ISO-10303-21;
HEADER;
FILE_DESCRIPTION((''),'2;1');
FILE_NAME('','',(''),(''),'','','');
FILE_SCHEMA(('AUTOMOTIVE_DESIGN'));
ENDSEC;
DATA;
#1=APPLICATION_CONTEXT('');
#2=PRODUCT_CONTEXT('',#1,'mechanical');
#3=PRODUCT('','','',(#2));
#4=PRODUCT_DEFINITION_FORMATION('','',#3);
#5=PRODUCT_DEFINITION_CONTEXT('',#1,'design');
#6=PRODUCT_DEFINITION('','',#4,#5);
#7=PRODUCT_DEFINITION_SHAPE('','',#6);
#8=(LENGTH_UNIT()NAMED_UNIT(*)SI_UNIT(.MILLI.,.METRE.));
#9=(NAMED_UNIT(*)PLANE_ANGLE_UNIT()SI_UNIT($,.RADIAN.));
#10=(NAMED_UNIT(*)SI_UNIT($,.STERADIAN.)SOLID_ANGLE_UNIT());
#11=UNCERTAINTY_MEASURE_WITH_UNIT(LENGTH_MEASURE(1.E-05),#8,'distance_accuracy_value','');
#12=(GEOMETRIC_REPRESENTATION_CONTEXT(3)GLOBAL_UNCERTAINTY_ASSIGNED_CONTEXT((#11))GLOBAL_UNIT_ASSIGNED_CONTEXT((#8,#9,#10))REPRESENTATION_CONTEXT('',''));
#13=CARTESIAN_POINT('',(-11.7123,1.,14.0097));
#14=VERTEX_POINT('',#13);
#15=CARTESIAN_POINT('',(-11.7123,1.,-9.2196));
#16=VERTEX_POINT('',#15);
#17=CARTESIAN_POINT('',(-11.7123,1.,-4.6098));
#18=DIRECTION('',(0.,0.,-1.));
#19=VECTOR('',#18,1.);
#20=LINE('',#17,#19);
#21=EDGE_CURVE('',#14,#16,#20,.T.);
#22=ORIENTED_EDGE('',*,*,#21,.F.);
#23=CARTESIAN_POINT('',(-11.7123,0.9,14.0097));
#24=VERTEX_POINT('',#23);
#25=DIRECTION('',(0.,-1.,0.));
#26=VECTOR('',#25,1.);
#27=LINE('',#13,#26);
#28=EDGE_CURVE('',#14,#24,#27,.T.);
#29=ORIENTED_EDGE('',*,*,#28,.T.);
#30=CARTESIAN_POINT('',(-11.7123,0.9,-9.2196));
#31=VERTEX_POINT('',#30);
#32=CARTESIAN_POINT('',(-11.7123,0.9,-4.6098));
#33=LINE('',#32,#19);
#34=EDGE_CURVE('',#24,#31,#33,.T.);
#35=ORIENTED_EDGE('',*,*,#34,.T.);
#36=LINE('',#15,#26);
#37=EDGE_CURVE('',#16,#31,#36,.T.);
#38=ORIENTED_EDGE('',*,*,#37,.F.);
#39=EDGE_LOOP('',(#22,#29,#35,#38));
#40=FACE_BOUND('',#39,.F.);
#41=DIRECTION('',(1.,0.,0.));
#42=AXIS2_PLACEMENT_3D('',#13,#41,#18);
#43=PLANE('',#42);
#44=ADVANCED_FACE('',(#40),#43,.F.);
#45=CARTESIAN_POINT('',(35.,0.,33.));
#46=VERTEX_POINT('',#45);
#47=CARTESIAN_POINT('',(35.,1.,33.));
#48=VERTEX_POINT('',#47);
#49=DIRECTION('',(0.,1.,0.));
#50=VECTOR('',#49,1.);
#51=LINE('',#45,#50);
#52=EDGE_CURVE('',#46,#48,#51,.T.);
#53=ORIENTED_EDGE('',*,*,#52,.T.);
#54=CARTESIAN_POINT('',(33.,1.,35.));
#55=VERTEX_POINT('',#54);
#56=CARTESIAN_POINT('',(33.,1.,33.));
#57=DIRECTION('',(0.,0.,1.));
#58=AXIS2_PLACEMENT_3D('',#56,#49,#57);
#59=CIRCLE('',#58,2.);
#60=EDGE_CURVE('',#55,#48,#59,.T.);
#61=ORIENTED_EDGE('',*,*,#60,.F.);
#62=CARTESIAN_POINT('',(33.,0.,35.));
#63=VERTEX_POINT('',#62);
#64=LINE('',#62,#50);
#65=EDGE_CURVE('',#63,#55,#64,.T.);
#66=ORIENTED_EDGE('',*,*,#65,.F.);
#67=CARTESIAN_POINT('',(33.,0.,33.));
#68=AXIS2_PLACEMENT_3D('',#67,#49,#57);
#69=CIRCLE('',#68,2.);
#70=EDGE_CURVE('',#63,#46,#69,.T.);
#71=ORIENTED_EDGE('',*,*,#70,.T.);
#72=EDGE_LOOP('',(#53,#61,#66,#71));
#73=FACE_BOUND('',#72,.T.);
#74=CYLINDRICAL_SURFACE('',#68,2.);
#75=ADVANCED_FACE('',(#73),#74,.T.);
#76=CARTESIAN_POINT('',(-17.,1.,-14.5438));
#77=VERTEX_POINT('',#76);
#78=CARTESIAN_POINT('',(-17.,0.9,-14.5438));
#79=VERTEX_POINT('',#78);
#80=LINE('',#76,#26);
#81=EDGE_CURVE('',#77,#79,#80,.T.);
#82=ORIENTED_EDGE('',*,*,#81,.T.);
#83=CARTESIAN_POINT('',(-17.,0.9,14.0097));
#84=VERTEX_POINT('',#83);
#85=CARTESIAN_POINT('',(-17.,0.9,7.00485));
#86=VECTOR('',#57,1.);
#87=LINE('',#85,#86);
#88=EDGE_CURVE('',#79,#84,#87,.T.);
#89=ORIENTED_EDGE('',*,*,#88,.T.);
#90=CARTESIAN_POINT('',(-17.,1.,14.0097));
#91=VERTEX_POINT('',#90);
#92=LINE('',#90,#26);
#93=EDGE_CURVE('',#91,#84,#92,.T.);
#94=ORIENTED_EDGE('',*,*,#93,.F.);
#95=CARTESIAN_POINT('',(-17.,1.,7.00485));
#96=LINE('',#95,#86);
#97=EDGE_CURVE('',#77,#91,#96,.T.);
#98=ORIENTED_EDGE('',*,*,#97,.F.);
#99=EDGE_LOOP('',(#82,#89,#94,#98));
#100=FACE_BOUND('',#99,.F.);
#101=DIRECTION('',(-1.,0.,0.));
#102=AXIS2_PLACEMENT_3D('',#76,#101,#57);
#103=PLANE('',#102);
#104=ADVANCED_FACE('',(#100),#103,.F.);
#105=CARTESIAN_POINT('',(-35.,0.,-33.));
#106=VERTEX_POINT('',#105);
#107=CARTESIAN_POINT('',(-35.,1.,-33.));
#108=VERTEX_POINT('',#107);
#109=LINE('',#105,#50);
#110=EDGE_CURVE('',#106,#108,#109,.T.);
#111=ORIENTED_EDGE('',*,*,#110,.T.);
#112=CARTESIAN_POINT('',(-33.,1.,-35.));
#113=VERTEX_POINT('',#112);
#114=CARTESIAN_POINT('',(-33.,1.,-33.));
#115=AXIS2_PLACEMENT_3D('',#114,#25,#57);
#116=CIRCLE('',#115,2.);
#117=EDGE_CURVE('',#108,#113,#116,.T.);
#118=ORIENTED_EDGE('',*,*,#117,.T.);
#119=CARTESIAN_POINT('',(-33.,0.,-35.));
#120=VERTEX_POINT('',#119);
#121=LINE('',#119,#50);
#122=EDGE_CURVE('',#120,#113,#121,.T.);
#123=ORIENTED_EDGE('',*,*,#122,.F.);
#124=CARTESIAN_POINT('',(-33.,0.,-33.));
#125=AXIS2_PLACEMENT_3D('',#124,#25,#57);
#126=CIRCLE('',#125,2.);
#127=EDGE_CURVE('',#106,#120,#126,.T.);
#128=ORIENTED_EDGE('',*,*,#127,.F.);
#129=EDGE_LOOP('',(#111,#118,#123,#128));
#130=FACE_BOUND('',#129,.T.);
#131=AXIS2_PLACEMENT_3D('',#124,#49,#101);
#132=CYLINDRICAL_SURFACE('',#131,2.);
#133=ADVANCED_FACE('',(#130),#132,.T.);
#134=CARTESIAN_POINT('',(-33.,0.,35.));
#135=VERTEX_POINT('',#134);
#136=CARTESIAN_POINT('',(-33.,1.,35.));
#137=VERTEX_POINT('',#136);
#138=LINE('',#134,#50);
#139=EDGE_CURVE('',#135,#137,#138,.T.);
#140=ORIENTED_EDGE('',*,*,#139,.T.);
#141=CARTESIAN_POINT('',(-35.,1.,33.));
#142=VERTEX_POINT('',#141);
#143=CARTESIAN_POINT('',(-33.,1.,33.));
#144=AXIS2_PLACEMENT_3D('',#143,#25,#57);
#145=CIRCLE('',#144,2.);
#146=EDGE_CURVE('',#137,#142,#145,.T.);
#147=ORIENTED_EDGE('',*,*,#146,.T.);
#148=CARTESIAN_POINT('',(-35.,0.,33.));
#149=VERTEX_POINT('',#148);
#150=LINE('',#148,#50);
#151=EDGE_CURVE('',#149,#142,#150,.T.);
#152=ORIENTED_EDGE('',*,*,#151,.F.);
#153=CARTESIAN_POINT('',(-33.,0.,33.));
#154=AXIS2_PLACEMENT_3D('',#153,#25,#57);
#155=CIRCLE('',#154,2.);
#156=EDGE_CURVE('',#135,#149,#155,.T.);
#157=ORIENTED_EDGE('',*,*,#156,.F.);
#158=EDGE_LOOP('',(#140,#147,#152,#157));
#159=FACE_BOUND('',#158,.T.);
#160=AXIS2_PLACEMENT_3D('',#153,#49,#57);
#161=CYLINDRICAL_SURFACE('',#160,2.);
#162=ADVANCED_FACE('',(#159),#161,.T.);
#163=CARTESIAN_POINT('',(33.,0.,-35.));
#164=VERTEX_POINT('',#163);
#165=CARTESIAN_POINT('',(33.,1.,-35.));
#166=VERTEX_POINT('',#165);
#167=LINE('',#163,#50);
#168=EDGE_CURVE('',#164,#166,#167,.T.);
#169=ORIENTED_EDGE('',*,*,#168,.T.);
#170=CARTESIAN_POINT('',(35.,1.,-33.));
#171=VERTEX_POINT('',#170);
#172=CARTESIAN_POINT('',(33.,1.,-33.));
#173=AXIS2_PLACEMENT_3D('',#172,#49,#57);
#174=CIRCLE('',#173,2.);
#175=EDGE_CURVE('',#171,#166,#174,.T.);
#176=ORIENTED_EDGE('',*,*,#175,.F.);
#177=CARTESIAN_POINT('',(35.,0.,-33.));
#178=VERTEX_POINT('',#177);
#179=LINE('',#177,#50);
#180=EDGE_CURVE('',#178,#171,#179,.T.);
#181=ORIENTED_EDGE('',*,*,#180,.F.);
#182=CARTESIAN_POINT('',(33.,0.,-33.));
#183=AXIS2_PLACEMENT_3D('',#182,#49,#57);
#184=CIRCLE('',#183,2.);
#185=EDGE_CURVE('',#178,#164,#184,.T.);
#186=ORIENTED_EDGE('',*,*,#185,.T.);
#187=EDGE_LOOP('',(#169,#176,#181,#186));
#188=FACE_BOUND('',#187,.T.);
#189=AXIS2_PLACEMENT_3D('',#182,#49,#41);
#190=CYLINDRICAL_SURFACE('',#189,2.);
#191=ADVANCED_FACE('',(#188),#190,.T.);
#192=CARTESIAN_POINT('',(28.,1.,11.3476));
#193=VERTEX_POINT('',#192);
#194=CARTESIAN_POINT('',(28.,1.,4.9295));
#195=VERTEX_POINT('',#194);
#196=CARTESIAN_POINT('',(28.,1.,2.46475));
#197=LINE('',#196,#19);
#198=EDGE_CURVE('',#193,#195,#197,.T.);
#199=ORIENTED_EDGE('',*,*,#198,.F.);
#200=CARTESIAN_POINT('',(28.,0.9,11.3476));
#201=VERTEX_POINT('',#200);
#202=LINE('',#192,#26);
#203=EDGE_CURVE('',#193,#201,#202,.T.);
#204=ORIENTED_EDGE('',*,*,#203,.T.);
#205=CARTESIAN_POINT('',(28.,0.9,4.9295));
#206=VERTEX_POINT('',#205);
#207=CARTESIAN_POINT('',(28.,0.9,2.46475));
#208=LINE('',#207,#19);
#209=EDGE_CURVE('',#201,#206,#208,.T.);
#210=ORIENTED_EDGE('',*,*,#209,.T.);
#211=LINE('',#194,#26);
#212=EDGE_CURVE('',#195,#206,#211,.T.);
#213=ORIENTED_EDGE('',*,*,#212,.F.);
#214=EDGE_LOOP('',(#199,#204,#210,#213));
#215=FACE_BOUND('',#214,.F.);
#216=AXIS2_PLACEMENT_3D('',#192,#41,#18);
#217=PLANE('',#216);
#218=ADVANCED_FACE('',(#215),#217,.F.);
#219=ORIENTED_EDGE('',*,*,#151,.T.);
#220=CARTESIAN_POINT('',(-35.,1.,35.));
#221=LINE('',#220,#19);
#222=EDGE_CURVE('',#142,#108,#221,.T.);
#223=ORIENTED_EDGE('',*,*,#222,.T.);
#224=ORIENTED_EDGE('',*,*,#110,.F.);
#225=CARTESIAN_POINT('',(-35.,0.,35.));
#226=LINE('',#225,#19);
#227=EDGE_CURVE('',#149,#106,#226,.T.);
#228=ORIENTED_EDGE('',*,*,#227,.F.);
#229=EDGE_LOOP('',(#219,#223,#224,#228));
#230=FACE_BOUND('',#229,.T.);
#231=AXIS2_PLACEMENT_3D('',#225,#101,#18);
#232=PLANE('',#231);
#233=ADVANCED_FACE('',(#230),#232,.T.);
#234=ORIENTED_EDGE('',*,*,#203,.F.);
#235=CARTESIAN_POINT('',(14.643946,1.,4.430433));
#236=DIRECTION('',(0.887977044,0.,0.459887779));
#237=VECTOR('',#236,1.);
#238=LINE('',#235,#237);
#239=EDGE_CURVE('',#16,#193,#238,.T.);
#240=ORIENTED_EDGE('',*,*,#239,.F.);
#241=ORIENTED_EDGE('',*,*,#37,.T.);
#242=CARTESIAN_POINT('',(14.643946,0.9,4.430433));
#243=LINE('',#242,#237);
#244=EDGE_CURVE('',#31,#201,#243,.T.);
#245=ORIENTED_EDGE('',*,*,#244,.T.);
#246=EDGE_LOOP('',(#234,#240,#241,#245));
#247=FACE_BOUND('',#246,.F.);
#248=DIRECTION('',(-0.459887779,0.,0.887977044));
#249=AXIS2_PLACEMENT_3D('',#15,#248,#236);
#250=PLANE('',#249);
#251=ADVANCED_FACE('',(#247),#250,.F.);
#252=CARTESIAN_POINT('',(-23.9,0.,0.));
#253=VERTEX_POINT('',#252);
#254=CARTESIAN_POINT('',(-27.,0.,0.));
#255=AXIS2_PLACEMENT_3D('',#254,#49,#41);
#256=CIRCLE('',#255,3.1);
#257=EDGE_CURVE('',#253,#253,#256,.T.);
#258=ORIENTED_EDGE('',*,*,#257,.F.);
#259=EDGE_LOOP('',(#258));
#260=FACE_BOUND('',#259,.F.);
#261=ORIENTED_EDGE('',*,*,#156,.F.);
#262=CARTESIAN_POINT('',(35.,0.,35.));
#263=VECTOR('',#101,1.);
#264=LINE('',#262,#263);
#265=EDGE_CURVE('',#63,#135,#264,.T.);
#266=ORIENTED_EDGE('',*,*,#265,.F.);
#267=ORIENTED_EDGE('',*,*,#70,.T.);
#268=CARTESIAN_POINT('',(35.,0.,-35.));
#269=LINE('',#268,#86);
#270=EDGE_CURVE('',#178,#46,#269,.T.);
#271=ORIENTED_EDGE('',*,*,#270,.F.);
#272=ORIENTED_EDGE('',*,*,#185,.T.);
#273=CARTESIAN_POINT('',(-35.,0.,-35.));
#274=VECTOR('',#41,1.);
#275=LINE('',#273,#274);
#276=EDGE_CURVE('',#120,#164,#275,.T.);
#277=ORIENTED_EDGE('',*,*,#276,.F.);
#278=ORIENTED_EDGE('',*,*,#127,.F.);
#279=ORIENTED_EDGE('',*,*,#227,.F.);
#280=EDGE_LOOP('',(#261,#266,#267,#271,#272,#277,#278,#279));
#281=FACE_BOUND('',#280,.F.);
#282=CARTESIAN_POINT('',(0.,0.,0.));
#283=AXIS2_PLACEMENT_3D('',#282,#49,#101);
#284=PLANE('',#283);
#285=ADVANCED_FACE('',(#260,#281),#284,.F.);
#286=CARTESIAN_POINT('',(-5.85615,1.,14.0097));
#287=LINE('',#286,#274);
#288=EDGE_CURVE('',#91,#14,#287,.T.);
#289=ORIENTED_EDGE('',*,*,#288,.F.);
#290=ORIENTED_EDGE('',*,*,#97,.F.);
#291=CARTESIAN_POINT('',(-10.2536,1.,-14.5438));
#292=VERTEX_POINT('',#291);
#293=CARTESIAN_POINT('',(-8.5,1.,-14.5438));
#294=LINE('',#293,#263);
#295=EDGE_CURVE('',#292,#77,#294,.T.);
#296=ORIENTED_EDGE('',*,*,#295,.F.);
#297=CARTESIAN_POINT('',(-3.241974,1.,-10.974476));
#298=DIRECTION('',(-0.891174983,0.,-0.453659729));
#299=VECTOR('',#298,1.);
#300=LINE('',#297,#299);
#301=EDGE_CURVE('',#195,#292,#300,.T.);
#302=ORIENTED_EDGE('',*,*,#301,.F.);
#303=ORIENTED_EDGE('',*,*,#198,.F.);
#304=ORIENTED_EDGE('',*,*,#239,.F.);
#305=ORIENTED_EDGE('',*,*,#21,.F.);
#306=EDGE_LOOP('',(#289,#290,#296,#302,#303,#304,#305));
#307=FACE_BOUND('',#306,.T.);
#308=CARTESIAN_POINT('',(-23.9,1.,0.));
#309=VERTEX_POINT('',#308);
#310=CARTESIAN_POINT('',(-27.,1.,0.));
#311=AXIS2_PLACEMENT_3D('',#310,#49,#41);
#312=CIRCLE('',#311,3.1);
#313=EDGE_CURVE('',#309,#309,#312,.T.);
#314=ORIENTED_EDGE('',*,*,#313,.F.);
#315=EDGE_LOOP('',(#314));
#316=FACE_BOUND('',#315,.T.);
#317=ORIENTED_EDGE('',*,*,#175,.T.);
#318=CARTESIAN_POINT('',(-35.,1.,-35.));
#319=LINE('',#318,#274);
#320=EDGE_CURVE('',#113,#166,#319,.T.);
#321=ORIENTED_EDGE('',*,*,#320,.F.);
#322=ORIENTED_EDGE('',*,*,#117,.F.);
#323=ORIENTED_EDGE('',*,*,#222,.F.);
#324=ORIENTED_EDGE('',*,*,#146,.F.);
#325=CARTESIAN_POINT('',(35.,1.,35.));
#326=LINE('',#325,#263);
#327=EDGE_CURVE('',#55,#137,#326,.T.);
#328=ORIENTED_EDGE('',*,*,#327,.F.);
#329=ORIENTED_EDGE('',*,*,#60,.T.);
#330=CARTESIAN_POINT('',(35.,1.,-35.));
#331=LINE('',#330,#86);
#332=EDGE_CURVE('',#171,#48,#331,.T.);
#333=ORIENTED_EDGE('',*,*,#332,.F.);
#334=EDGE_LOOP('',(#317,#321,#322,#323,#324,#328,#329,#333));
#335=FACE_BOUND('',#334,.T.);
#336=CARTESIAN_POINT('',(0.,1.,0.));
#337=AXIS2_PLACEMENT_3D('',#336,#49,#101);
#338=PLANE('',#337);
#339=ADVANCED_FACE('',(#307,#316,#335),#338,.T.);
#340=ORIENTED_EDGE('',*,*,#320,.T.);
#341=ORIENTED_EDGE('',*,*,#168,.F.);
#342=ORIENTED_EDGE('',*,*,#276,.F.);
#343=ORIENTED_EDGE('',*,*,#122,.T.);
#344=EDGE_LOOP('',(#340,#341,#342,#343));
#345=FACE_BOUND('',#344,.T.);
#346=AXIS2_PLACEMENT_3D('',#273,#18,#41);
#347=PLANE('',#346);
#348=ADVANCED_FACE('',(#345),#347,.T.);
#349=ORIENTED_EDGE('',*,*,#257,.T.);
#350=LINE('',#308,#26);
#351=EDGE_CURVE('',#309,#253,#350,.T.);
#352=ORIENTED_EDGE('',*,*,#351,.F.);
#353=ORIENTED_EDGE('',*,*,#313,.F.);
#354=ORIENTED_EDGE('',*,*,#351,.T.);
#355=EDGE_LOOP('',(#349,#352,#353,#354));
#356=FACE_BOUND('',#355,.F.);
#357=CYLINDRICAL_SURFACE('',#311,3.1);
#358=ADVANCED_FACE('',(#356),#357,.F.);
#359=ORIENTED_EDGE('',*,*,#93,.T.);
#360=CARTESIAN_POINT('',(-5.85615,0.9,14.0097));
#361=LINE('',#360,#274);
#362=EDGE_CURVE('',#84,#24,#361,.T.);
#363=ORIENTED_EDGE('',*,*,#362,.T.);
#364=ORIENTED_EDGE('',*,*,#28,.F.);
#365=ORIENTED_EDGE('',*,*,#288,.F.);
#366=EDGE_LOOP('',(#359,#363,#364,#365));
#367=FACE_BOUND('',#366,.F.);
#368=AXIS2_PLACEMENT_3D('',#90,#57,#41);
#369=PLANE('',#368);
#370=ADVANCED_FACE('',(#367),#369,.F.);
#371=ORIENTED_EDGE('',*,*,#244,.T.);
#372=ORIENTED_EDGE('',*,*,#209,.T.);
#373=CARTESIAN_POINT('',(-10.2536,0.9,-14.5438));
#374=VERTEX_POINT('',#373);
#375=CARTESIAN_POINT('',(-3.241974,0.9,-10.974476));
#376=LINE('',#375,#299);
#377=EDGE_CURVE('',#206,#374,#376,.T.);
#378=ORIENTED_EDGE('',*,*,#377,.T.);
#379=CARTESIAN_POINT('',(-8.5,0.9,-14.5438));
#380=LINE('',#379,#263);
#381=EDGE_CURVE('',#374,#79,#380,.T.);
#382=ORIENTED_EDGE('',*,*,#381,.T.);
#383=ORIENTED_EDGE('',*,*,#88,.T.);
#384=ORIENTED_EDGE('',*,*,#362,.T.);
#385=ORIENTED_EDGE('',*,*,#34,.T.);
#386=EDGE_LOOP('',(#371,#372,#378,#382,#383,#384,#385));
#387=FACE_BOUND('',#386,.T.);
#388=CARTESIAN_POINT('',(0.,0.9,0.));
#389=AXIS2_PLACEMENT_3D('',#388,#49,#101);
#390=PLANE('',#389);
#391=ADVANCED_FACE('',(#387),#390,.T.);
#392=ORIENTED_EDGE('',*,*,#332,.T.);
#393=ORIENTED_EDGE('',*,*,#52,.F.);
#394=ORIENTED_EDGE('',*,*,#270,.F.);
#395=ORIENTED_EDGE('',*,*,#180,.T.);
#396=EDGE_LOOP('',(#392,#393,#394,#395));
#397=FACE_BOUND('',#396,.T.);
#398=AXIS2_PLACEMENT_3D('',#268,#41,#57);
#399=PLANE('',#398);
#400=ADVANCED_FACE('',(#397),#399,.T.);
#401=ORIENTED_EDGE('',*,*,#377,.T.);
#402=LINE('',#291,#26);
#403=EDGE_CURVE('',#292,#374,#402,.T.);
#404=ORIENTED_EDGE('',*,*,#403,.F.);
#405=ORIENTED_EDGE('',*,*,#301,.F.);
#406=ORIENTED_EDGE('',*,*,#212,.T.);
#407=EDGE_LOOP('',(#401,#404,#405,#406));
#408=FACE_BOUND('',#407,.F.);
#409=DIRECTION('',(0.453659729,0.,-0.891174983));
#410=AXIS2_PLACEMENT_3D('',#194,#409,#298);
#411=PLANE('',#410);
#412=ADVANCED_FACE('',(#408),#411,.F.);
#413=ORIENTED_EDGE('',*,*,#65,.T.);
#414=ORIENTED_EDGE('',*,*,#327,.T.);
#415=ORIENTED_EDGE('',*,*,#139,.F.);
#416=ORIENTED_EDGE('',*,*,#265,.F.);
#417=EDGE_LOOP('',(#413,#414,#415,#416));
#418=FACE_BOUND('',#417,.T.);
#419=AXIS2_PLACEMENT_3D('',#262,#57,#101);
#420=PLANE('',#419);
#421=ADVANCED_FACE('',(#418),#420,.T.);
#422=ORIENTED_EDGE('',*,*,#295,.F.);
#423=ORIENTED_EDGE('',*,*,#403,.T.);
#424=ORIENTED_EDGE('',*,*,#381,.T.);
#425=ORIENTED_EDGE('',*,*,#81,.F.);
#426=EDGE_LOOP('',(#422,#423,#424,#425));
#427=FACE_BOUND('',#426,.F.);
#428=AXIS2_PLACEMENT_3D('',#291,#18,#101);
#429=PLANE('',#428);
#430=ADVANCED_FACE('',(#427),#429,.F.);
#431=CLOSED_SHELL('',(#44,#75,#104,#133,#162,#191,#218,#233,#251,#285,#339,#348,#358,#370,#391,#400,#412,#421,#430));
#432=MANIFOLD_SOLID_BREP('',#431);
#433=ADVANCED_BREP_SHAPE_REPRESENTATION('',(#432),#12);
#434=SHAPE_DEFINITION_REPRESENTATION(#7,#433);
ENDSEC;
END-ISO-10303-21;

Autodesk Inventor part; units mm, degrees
ref_plane "YZ Plane" through (0, 0, 0) normal (1, 0, 0) x (0, 1, 0)
ref_plane "XZ Plane" through (0, 0, 0) normal (0, 1, 0) x (-1, 0, 0)
ref_plane "XY Plane" through (0, 0, 0) normal (0, 0, 1) x (1, 0, 0)
sketch "Sketch1" plane through (0, 0, 0) normal (0, 1, 0) x (-1, 0, 0)
  line L0 (-35, 35) -> (35, 35)
  line L1 (35, 35) -> (35, -35)
  line L2 (35, -35) -> (-35, -35)
  line L3 (-35, -35) -> (-35, 35)
  line L4 (-35, 35) -> (35, -35) construction
  line L5 (35, 35) -> (-35, -35) construction
  point P0 (0, 0)
  dimension "d0" = 70
  dimension "d1" = 70
extrude "Extrusion1" add sketch "Sketch1" along normal blind 1
sketch "Sketch2" plane through (0, 1, 0) normal (0, 1, 0) x (1, 0, 0)
  line L0 (-17, -17) -> (-17, 35) construction
  line L1 (25, -35) -> (25, 35) construction
  line L2 (35, -35) -> (35, 35) projected
  line L3 (-35, 35) -> (-35, -35) projected
  line L4 (-10.2536, 14.5438) -> (28, -4.9295)
  line L5 (28, -4.9295) -> (28, -11.3476)
  line L6 (28, -11.3476) -> (-11.7123, 9.2196)
  line L7 (-11.7123, 9.2196) -> (-11.7123, -14.0097)
  line L8 (-11.7123, -14.0097) -> (-17, -14.0097)
  line L9 (-17, -14.0097) -> (-17, 14.5438)
  line L10 (-17, 14.5438) -> (-10.2536, 14.5438)
  point P0 (0, 0)
  dimension "d4" = 10
  dimension "d5" = 18
sketch "Sketch5" plane through (0, 1, 0) normal (0, 1, 0) x (1, 0, 0)
  circle A0 centre (-27, 0) radius 3.1
  line L0 (-35, 35) -> (-35, -35) projected
  line L1 (-35, 0) -> (0, 0) construction
  dimension "d14" = 6.2
  dimension "d15" = 8
extrude "Extrusion4" cut sketch "Sketch5" against normal up to next
fillet "Fillet1" radius 2 4 edges at (-35, 0.5, -35) (-35, 0.5, 35) (35, 0.5, -35) (35, 0.5, 35)
emboss "Emboss2" sketch "Sketch2" operation cut depth 0.1 direction (0, -1, 0)
properties part number "AntennaNameplate"
